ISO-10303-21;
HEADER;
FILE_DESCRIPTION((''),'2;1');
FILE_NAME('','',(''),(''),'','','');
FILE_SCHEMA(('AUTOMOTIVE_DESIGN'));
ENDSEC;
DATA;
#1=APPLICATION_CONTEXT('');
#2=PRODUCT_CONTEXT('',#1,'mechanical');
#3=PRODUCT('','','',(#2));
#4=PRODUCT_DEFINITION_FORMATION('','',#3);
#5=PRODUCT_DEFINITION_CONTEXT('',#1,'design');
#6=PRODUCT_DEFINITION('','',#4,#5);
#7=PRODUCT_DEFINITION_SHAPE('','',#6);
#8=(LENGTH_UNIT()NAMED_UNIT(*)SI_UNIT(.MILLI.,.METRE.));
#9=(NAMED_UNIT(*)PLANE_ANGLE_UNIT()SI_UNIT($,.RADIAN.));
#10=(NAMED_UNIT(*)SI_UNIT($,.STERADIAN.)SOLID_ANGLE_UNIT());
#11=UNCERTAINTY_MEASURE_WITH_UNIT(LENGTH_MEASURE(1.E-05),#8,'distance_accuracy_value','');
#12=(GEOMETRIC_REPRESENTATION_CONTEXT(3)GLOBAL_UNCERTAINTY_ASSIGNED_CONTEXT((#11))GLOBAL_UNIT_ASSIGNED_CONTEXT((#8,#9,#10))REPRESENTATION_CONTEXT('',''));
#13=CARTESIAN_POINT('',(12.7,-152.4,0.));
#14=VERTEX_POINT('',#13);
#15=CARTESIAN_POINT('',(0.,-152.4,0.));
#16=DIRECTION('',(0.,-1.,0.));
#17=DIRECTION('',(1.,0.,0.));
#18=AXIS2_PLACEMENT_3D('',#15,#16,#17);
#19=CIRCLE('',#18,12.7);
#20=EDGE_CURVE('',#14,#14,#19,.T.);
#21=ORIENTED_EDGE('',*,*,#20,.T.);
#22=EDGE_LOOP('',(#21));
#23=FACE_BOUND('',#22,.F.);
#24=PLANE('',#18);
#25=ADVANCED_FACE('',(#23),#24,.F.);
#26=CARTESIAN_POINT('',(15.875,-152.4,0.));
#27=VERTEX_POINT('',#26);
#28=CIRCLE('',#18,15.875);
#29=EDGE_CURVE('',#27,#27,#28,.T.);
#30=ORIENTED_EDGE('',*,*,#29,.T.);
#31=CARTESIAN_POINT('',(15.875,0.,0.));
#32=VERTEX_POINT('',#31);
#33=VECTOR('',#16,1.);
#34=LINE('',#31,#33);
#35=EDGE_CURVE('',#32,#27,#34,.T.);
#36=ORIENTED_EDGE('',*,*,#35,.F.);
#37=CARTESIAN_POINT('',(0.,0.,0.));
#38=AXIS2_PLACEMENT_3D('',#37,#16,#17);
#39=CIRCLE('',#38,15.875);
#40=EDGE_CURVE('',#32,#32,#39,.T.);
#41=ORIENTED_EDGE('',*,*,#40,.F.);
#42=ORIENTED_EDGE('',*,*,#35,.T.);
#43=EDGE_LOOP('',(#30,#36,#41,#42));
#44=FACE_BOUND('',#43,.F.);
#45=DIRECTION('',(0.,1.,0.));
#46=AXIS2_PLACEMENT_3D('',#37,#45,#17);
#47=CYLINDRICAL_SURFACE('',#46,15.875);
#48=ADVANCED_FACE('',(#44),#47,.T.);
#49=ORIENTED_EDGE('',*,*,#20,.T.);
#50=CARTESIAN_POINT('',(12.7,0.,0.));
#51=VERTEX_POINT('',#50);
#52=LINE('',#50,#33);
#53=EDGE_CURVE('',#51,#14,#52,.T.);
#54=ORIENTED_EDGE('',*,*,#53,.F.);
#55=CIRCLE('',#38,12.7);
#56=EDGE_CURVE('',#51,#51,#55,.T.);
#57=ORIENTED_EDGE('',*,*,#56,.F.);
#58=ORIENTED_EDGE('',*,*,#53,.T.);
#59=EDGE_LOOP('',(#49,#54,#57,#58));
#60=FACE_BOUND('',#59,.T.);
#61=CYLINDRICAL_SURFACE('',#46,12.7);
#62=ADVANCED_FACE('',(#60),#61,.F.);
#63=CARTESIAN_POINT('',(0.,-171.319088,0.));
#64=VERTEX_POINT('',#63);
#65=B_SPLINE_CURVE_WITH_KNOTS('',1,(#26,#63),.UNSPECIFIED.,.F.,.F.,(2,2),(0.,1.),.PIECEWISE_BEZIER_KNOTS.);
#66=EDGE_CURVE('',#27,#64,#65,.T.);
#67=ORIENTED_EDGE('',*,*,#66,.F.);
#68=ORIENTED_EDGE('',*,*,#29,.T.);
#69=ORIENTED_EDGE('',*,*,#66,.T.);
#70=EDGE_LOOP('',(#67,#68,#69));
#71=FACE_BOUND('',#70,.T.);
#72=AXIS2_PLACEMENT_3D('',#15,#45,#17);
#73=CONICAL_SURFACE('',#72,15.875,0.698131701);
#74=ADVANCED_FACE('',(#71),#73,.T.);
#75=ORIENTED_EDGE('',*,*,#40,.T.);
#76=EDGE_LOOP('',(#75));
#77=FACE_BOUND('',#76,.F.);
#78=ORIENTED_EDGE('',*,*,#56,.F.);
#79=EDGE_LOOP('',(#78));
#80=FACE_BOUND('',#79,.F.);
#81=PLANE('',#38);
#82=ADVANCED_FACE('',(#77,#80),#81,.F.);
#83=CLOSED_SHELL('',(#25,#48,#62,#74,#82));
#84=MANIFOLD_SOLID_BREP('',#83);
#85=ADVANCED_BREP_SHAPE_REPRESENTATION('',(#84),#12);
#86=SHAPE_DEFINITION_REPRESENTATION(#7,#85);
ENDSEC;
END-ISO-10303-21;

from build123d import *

# Parameters (mm, degrees)
F0_R     = 15.875
F0_R_2   = 12.7
F1_DEPTH = 152.4
F2_R     = 15.875


# Not quite as in the source:
# - an extrude whose draft closes it to a point is written as a loft to that point


with BuildPart() as f1:
    # F0 (on Front) → F1 (new body)
    with BuildSketch(Plane.XZ):
        Circle(F0_R)
        Circle(F0_R_2, mode=Mode.SUBTRACT)
    extrude(amount=F1_DEPTH)

    # F2 (on face) → F3 section 0
    with BuildSketch(Plane.XZ.offset(152.4), mode=Mode.PRIVATE) as f3_s0:
        Circle(F2_R)
    loft([f3_s0.sketch, Vertex(0, -171.3190882824, 0)], ruled=True)


solid = f1.part
